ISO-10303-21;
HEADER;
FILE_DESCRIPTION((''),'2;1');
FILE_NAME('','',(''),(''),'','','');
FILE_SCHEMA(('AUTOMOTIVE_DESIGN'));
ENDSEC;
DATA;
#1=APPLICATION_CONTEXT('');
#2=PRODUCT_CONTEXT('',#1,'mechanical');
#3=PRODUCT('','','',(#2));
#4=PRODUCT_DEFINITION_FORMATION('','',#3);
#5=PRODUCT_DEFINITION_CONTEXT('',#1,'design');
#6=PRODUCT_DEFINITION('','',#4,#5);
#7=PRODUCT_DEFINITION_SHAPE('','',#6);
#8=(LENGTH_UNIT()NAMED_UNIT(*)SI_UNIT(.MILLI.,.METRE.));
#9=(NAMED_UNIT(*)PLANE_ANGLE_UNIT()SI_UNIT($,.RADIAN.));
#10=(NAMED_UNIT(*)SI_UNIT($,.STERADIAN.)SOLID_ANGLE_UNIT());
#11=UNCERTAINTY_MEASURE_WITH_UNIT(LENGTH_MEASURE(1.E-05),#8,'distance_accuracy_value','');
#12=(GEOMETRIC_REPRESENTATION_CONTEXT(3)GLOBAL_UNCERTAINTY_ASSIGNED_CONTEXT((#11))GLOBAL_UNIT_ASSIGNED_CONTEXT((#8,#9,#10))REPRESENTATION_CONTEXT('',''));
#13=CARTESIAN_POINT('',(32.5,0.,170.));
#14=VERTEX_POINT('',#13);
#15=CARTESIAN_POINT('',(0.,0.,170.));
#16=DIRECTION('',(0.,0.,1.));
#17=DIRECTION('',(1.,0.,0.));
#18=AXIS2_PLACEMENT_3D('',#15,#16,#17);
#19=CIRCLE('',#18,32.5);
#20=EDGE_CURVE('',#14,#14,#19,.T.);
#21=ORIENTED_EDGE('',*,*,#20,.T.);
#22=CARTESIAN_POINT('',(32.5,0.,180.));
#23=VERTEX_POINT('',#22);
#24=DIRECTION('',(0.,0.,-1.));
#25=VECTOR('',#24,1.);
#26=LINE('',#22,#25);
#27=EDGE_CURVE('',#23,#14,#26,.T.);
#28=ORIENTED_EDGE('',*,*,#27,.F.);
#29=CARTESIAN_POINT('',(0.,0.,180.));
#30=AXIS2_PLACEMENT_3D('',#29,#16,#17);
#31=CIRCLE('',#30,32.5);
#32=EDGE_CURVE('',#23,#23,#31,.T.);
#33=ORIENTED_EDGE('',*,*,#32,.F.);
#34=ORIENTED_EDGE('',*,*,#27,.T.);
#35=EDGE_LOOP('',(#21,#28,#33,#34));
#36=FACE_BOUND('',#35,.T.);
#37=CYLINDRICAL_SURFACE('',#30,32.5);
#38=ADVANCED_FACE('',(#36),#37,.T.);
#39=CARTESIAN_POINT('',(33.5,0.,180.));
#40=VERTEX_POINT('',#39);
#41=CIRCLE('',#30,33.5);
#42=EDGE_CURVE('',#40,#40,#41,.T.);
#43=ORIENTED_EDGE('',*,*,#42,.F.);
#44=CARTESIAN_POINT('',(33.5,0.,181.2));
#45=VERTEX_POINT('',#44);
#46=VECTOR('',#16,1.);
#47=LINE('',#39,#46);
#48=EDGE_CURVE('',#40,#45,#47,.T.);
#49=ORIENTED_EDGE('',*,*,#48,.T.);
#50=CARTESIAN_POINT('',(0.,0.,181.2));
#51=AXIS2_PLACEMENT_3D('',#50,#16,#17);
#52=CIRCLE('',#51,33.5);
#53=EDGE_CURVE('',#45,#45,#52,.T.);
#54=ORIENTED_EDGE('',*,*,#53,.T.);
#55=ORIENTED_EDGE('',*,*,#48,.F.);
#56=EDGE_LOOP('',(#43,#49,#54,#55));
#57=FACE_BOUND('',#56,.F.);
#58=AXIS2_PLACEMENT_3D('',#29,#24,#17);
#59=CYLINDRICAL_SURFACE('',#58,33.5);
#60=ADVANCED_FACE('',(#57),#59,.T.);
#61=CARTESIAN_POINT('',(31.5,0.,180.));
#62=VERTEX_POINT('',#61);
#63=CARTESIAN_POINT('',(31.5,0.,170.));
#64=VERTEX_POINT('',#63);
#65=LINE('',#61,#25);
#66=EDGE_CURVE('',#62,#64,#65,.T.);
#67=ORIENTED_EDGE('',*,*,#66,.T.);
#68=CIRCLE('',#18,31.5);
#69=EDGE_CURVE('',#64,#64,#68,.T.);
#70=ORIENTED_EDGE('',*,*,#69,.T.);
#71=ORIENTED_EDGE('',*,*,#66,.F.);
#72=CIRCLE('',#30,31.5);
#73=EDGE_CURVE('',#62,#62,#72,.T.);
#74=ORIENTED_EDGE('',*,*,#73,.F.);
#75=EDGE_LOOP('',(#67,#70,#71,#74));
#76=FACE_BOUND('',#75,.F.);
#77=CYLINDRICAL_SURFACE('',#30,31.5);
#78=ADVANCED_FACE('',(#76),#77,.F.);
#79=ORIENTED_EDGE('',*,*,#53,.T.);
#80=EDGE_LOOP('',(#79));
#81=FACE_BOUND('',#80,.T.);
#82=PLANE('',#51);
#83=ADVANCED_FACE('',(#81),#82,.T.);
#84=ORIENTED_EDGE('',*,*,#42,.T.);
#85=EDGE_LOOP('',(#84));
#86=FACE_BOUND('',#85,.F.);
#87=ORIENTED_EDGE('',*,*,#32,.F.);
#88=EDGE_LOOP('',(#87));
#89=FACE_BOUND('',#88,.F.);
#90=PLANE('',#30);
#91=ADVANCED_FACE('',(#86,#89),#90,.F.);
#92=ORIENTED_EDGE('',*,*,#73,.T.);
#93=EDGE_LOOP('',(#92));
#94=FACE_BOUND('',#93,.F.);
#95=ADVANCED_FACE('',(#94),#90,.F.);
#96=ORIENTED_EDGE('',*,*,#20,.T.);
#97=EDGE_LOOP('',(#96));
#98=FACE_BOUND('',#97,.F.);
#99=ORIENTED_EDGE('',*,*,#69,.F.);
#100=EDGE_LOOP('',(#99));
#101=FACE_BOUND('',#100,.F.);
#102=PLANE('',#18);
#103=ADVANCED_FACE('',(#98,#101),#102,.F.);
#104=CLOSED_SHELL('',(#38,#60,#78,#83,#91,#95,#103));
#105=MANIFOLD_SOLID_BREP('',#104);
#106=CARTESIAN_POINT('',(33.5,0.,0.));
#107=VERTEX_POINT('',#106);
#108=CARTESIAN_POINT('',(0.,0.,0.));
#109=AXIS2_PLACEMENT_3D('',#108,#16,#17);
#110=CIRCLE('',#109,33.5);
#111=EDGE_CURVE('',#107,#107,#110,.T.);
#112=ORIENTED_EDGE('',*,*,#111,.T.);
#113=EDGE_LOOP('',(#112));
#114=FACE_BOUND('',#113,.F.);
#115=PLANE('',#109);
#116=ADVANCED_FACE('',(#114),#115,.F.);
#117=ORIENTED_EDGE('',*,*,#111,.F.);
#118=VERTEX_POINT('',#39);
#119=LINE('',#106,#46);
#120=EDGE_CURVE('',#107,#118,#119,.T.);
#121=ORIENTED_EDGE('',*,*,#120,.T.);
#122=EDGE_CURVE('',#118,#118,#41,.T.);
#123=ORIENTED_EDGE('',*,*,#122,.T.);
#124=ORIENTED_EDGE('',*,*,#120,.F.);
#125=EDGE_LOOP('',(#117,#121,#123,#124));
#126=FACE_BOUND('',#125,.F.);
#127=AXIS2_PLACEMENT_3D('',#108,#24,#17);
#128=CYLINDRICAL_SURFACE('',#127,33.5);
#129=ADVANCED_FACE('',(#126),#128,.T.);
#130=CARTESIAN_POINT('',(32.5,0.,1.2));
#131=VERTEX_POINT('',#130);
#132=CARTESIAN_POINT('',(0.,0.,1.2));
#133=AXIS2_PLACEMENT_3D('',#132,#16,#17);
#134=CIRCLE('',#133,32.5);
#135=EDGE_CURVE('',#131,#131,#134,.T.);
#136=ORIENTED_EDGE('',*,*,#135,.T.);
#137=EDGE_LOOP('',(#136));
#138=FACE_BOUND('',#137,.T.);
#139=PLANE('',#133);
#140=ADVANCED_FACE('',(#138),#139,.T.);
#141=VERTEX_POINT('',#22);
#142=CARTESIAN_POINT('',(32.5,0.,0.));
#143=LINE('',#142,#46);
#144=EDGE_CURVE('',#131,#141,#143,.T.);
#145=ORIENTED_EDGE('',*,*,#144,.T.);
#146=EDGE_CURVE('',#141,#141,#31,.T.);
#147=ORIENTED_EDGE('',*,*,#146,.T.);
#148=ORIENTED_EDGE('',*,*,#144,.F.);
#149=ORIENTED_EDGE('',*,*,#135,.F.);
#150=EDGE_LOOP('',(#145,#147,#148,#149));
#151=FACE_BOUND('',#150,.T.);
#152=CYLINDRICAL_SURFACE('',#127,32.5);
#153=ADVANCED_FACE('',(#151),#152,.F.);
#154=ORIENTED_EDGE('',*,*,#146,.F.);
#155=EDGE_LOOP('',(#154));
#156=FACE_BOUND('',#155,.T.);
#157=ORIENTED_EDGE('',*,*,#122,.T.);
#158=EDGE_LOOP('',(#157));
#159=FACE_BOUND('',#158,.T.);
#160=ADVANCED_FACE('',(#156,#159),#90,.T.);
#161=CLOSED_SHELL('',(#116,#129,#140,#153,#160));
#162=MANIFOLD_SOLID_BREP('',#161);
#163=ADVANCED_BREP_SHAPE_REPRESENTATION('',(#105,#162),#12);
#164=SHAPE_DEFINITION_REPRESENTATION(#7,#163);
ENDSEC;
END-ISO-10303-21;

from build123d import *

# Parameters (mm, degrees)
F0_R     = 33.5
F0_R_2   = 32.5
F1_DEPTH = 180
F2_DEPTH = 1.2
F3_R     = 33.5
F3_R_2   = 32.5
F3_R_3   = 31.5
F4_DEPTH = 1.2
F5_DEPTH = 10


with BuildPart() as f1:
    # F0 (on Top) → F1 (new body)
    with BuildSketch(Plane.XY):
        Circle(F0_R)
        Circle(F0_R_2, mode=Mode.SUBTRACT)
    extrude(amount=F1_DEPTH)

    # F0 (on Top) → F2 (join)
    with BuildSketch(Plane.XY):
        Circle(F0_R_2)
    extrude(amount=F2_DEPTH)


with BuildPart() as f4:
    # F3 (on face) → F4 (new body)
    with BuildSketch(Plane.XY.offset(180)):
        Circle(F3_R)
        Circle(F3_R_2, mode=Mode.SUBTRACT)
        Circle(F3_R_2)
        Circle(F3_R_3, mode=Mode.SUBTRACT)
        Circle(F3_R_3)
    extrude(amount=F4_DEPTH)

    # F3 (on face) → F5 (join)
    with BuildSketch(Plane.XY.offset(180)):
        Circle(F3_R_2)
        Circle(F3_R_3, mode=Mode.SUBTRACT)
    extrude(amount=-F5_DEPTH)


solid = Compound([f1.part, f4.part])
